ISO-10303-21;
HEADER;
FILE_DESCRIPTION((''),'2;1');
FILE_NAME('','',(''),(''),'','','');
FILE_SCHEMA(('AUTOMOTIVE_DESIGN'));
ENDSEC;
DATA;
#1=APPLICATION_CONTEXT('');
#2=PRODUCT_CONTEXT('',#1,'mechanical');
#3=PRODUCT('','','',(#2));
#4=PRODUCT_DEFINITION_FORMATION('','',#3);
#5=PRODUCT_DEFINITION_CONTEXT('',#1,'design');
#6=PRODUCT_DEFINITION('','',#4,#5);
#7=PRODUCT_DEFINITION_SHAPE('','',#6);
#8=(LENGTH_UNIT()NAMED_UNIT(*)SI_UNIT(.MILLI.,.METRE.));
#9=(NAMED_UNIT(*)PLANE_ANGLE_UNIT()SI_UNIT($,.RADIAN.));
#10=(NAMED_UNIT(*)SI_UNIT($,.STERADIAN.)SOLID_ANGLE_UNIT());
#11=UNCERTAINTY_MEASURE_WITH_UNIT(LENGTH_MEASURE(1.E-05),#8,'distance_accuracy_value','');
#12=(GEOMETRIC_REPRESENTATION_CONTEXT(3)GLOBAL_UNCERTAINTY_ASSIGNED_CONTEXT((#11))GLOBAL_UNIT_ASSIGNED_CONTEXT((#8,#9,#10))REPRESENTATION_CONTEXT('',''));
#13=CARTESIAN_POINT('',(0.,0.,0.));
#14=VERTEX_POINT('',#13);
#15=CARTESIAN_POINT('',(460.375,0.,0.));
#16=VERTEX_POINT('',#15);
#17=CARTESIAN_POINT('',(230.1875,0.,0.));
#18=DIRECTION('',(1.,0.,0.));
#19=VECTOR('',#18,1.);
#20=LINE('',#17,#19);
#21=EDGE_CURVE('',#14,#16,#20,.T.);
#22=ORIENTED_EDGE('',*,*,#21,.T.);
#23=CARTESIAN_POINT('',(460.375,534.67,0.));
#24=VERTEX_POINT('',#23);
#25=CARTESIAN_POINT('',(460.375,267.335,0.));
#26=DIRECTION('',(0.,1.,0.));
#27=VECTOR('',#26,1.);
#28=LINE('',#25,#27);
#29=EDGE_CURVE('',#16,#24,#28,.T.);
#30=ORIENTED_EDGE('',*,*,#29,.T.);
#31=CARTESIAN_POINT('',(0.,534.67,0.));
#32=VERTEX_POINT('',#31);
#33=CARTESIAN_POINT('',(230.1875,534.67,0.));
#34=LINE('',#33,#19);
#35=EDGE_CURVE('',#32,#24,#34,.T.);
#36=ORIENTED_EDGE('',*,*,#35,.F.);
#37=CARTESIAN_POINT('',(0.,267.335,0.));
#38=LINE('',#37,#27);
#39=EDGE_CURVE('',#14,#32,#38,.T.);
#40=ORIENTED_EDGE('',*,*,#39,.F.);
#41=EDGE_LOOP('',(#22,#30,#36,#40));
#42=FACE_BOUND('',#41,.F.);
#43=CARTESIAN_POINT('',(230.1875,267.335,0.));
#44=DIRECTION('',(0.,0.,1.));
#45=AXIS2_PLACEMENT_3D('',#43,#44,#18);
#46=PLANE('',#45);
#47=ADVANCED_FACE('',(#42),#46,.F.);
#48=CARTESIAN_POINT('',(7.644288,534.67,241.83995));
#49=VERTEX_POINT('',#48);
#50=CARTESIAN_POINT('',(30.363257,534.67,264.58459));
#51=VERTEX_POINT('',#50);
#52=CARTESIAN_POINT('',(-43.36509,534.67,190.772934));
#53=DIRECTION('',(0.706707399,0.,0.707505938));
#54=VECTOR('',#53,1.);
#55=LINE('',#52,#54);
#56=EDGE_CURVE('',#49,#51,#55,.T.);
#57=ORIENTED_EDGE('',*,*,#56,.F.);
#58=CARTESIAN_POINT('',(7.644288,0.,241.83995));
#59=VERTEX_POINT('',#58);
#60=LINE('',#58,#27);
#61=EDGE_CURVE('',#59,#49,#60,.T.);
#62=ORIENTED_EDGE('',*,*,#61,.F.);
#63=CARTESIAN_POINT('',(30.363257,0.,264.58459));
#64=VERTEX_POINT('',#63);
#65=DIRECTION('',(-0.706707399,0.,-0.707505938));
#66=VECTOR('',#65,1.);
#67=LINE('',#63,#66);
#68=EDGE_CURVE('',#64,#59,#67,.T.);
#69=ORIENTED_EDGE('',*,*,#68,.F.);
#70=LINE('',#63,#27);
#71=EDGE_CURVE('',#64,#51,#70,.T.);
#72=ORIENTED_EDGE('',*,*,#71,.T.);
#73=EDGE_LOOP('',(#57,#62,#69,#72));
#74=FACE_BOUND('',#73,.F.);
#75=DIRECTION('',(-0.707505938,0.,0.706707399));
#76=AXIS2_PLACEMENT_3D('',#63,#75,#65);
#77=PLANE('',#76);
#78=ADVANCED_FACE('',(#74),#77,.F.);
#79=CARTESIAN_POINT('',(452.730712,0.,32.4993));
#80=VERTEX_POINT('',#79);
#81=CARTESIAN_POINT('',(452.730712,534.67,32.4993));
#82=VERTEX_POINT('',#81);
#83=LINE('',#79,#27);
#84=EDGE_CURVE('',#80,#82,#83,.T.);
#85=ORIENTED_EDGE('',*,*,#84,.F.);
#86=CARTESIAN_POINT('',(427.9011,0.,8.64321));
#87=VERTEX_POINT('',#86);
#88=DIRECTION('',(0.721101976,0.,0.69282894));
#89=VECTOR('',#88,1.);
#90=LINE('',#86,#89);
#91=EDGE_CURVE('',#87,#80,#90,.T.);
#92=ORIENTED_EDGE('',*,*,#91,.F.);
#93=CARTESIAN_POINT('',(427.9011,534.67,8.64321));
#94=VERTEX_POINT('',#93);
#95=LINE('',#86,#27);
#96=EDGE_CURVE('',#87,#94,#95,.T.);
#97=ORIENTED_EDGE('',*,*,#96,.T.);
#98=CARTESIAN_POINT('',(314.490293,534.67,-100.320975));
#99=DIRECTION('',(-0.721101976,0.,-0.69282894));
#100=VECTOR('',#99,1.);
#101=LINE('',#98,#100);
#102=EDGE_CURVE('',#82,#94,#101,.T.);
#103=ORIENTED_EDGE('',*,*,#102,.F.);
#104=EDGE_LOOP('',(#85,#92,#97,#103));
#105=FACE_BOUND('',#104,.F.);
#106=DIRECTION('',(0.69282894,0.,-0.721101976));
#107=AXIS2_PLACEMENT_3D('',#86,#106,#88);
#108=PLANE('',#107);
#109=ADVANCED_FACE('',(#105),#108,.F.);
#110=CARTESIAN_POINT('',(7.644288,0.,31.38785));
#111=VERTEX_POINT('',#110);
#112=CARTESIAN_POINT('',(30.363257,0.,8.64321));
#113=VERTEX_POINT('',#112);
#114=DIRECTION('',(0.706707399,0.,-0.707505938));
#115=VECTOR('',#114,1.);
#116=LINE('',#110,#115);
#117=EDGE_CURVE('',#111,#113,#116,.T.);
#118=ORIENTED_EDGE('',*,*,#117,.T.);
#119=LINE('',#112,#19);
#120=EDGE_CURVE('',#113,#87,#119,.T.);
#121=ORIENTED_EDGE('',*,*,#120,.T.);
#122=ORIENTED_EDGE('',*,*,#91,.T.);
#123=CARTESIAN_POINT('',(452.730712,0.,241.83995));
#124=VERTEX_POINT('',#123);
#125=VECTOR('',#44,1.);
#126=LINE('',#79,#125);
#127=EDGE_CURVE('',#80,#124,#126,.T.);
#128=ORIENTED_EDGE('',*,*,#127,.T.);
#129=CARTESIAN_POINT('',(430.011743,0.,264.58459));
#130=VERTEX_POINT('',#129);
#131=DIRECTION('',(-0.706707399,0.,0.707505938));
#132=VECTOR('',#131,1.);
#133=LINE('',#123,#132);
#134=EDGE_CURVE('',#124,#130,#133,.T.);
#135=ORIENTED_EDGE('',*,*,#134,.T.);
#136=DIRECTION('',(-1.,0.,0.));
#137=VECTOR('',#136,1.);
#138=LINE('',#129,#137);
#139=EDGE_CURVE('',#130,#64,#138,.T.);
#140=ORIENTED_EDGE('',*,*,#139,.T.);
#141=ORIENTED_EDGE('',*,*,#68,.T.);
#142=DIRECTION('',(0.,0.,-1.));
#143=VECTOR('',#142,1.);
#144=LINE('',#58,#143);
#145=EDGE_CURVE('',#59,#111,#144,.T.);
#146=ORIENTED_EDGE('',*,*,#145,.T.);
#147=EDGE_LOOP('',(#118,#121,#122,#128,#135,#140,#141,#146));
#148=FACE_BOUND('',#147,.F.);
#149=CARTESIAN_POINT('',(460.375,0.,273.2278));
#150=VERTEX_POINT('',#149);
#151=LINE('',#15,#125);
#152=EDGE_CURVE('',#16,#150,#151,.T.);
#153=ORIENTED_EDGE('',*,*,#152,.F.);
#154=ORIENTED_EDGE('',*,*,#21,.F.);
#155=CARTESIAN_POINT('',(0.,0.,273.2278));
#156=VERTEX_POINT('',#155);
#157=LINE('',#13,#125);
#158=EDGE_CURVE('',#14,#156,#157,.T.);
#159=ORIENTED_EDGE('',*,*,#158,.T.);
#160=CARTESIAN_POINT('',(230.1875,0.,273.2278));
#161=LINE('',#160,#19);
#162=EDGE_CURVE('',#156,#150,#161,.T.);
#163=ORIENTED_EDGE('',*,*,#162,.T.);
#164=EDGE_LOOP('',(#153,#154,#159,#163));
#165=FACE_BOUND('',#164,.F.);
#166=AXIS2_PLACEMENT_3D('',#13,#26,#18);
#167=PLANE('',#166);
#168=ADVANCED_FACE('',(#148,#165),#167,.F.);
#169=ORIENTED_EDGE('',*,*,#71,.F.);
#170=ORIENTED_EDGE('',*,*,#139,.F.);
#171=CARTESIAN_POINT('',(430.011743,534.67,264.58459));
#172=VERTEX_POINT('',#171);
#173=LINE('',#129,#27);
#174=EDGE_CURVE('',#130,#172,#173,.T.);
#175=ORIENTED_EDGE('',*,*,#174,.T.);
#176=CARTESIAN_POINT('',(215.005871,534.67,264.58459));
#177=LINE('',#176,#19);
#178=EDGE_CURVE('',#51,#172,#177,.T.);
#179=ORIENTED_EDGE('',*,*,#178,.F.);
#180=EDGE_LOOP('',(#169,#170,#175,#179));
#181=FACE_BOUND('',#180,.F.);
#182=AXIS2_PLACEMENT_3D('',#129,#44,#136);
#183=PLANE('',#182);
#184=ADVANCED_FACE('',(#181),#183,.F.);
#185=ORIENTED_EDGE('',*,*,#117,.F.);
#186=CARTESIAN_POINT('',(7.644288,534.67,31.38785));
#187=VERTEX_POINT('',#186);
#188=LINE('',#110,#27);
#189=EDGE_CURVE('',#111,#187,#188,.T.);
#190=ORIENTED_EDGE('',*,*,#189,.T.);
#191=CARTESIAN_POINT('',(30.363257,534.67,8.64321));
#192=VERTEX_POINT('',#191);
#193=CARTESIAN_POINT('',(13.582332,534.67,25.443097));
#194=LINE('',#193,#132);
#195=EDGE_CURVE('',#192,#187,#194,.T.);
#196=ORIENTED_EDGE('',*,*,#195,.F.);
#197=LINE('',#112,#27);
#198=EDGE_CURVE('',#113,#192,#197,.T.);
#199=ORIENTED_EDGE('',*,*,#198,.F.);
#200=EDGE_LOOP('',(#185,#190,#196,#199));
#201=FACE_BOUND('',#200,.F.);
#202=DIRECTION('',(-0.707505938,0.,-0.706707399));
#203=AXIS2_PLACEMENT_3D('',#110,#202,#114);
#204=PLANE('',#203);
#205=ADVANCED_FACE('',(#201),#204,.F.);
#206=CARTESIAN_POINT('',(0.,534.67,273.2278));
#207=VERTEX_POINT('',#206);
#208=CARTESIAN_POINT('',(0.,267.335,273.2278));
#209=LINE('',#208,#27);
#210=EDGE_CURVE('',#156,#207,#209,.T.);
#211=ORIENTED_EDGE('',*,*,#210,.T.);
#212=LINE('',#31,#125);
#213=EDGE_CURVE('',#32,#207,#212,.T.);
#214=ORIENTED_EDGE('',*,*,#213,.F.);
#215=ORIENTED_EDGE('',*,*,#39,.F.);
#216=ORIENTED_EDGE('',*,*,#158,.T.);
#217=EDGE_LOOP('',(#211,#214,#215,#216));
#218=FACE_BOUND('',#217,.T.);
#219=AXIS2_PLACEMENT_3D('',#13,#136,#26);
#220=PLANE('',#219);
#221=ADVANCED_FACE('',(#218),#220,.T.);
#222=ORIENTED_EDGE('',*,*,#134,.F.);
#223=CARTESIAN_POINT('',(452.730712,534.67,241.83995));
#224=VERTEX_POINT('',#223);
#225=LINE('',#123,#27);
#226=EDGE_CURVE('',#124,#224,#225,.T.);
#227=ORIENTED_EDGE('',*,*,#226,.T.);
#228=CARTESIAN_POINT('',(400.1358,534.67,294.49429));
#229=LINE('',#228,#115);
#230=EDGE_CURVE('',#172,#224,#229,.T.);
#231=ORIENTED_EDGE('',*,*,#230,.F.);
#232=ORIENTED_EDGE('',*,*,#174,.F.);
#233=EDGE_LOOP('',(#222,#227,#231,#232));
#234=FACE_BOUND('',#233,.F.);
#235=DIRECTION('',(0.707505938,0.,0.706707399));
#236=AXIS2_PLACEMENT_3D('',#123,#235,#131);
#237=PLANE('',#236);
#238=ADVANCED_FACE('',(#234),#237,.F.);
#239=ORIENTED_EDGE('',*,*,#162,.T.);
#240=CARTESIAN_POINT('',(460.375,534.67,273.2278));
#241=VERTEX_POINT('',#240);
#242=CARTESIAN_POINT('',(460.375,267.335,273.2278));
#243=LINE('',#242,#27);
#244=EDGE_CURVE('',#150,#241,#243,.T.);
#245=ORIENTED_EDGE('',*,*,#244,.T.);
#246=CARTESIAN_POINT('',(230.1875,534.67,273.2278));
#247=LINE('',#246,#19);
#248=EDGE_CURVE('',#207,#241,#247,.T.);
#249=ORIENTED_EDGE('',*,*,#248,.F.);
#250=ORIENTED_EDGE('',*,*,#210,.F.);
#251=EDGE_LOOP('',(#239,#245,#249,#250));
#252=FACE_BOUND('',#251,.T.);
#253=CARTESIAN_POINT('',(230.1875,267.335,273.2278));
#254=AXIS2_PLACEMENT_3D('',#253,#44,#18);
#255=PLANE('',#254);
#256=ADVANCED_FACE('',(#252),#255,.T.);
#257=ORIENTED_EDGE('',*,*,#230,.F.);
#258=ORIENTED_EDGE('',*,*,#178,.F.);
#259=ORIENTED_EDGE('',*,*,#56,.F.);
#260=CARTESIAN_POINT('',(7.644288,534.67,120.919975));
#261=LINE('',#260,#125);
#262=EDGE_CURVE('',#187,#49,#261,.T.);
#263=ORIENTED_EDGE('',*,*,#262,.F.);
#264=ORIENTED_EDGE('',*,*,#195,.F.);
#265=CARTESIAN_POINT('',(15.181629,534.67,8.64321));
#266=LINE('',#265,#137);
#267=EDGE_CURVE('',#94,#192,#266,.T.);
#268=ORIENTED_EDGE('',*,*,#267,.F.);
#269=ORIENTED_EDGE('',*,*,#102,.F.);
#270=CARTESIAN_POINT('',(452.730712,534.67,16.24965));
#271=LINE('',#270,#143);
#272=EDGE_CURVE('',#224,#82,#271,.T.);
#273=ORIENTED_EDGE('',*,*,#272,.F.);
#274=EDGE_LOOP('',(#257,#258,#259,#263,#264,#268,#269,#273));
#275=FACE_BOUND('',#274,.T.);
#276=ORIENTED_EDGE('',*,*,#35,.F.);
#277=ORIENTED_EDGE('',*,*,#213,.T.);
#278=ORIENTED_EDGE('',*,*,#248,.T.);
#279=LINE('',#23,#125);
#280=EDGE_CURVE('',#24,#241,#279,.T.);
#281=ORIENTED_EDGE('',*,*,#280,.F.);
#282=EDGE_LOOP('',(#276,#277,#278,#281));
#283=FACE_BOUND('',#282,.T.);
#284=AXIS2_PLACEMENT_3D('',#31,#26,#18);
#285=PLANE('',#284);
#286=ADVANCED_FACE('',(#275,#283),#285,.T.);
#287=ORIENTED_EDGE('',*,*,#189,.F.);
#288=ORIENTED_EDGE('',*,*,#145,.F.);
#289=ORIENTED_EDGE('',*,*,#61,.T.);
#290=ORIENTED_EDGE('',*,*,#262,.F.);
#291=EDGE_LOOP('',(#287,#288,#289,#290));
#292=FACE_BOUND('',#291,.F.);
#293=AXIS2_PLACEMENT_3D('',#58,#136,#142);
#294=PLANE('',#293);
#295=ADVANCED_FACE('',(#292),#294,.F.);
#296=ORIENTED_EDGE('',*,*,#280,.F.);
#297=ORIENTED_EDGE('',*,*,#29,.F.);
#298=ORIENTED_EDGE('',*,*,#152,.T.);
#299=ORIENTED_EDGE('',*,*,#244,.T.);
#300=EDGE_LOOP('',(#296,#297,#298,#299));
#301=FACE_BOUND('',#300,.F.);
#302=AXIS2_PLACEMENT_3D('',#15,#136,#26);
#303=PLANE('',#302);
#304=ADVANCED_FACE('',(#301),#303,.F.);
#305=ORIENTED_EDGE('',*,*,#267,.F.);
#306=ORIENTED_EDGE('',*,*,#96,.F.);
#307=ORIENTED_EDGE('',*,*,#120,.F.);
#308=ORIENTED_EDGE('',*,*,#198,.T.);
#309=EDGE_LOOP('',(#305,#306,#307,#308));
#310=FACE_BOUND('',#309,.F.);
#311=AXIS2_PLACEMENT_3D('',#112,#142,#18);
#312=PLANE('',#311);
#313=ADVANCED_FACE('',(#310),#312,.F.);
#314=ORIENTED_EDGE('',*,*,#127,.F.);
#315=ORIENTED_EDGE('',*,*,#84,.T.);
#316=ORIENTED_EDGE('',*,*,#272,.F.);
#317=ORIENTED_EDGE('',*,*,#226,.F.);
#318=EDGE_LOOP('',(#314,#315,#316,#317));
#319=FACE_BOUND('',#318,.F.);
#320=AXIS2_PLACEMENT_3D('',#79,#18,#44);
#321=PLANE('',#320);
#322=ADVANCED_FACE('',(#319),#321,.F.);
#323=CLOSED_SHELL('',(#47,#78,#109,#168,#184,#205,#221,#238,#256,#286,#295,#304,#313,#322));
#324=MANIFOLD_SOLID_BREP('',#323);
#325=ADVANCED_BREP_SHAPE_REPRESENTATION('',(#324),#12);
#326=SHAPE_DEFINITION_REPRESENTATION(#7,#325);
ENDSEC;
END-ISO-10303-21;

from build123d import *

# Parameters (mm, degrees)
F0_W     = 460.375
F0_H     = 534.67
F1_DEPTH = 273.2278
F3_DEPTH = 536.956


# Not quite as in the source:
# - a feature names something its author has since deleted; it is built from what else it names


with BuildPart() as f1:
    # F0 (on Top) → F1 (new body)
    with BuildSketch(Plane.XY):
        with Locations((230.1875, 267.335)):
            Rectangle(F0_W, F0_H)
    extrude(amount=F1_DEPTH)

    # F2 (on face) → F3 (cut)
    with BuildSketch(Plane.XZ):
        Polygon((452.7307115978, 241.8399496412), (430.0117425975, 264.584589793), (30.3632574025, 264.584589793), (7.6442884022, 241.8399496412), (7.6442884022, 31.3878503588), (30.3632574025, 8.643210207), (427.9011, 8.643210207), (452.7307115978, 32.4993), align=None)
    extrude(amount=-F3_DEPTH, mode=Mode.SUBTRACT)


solid = f1.part
